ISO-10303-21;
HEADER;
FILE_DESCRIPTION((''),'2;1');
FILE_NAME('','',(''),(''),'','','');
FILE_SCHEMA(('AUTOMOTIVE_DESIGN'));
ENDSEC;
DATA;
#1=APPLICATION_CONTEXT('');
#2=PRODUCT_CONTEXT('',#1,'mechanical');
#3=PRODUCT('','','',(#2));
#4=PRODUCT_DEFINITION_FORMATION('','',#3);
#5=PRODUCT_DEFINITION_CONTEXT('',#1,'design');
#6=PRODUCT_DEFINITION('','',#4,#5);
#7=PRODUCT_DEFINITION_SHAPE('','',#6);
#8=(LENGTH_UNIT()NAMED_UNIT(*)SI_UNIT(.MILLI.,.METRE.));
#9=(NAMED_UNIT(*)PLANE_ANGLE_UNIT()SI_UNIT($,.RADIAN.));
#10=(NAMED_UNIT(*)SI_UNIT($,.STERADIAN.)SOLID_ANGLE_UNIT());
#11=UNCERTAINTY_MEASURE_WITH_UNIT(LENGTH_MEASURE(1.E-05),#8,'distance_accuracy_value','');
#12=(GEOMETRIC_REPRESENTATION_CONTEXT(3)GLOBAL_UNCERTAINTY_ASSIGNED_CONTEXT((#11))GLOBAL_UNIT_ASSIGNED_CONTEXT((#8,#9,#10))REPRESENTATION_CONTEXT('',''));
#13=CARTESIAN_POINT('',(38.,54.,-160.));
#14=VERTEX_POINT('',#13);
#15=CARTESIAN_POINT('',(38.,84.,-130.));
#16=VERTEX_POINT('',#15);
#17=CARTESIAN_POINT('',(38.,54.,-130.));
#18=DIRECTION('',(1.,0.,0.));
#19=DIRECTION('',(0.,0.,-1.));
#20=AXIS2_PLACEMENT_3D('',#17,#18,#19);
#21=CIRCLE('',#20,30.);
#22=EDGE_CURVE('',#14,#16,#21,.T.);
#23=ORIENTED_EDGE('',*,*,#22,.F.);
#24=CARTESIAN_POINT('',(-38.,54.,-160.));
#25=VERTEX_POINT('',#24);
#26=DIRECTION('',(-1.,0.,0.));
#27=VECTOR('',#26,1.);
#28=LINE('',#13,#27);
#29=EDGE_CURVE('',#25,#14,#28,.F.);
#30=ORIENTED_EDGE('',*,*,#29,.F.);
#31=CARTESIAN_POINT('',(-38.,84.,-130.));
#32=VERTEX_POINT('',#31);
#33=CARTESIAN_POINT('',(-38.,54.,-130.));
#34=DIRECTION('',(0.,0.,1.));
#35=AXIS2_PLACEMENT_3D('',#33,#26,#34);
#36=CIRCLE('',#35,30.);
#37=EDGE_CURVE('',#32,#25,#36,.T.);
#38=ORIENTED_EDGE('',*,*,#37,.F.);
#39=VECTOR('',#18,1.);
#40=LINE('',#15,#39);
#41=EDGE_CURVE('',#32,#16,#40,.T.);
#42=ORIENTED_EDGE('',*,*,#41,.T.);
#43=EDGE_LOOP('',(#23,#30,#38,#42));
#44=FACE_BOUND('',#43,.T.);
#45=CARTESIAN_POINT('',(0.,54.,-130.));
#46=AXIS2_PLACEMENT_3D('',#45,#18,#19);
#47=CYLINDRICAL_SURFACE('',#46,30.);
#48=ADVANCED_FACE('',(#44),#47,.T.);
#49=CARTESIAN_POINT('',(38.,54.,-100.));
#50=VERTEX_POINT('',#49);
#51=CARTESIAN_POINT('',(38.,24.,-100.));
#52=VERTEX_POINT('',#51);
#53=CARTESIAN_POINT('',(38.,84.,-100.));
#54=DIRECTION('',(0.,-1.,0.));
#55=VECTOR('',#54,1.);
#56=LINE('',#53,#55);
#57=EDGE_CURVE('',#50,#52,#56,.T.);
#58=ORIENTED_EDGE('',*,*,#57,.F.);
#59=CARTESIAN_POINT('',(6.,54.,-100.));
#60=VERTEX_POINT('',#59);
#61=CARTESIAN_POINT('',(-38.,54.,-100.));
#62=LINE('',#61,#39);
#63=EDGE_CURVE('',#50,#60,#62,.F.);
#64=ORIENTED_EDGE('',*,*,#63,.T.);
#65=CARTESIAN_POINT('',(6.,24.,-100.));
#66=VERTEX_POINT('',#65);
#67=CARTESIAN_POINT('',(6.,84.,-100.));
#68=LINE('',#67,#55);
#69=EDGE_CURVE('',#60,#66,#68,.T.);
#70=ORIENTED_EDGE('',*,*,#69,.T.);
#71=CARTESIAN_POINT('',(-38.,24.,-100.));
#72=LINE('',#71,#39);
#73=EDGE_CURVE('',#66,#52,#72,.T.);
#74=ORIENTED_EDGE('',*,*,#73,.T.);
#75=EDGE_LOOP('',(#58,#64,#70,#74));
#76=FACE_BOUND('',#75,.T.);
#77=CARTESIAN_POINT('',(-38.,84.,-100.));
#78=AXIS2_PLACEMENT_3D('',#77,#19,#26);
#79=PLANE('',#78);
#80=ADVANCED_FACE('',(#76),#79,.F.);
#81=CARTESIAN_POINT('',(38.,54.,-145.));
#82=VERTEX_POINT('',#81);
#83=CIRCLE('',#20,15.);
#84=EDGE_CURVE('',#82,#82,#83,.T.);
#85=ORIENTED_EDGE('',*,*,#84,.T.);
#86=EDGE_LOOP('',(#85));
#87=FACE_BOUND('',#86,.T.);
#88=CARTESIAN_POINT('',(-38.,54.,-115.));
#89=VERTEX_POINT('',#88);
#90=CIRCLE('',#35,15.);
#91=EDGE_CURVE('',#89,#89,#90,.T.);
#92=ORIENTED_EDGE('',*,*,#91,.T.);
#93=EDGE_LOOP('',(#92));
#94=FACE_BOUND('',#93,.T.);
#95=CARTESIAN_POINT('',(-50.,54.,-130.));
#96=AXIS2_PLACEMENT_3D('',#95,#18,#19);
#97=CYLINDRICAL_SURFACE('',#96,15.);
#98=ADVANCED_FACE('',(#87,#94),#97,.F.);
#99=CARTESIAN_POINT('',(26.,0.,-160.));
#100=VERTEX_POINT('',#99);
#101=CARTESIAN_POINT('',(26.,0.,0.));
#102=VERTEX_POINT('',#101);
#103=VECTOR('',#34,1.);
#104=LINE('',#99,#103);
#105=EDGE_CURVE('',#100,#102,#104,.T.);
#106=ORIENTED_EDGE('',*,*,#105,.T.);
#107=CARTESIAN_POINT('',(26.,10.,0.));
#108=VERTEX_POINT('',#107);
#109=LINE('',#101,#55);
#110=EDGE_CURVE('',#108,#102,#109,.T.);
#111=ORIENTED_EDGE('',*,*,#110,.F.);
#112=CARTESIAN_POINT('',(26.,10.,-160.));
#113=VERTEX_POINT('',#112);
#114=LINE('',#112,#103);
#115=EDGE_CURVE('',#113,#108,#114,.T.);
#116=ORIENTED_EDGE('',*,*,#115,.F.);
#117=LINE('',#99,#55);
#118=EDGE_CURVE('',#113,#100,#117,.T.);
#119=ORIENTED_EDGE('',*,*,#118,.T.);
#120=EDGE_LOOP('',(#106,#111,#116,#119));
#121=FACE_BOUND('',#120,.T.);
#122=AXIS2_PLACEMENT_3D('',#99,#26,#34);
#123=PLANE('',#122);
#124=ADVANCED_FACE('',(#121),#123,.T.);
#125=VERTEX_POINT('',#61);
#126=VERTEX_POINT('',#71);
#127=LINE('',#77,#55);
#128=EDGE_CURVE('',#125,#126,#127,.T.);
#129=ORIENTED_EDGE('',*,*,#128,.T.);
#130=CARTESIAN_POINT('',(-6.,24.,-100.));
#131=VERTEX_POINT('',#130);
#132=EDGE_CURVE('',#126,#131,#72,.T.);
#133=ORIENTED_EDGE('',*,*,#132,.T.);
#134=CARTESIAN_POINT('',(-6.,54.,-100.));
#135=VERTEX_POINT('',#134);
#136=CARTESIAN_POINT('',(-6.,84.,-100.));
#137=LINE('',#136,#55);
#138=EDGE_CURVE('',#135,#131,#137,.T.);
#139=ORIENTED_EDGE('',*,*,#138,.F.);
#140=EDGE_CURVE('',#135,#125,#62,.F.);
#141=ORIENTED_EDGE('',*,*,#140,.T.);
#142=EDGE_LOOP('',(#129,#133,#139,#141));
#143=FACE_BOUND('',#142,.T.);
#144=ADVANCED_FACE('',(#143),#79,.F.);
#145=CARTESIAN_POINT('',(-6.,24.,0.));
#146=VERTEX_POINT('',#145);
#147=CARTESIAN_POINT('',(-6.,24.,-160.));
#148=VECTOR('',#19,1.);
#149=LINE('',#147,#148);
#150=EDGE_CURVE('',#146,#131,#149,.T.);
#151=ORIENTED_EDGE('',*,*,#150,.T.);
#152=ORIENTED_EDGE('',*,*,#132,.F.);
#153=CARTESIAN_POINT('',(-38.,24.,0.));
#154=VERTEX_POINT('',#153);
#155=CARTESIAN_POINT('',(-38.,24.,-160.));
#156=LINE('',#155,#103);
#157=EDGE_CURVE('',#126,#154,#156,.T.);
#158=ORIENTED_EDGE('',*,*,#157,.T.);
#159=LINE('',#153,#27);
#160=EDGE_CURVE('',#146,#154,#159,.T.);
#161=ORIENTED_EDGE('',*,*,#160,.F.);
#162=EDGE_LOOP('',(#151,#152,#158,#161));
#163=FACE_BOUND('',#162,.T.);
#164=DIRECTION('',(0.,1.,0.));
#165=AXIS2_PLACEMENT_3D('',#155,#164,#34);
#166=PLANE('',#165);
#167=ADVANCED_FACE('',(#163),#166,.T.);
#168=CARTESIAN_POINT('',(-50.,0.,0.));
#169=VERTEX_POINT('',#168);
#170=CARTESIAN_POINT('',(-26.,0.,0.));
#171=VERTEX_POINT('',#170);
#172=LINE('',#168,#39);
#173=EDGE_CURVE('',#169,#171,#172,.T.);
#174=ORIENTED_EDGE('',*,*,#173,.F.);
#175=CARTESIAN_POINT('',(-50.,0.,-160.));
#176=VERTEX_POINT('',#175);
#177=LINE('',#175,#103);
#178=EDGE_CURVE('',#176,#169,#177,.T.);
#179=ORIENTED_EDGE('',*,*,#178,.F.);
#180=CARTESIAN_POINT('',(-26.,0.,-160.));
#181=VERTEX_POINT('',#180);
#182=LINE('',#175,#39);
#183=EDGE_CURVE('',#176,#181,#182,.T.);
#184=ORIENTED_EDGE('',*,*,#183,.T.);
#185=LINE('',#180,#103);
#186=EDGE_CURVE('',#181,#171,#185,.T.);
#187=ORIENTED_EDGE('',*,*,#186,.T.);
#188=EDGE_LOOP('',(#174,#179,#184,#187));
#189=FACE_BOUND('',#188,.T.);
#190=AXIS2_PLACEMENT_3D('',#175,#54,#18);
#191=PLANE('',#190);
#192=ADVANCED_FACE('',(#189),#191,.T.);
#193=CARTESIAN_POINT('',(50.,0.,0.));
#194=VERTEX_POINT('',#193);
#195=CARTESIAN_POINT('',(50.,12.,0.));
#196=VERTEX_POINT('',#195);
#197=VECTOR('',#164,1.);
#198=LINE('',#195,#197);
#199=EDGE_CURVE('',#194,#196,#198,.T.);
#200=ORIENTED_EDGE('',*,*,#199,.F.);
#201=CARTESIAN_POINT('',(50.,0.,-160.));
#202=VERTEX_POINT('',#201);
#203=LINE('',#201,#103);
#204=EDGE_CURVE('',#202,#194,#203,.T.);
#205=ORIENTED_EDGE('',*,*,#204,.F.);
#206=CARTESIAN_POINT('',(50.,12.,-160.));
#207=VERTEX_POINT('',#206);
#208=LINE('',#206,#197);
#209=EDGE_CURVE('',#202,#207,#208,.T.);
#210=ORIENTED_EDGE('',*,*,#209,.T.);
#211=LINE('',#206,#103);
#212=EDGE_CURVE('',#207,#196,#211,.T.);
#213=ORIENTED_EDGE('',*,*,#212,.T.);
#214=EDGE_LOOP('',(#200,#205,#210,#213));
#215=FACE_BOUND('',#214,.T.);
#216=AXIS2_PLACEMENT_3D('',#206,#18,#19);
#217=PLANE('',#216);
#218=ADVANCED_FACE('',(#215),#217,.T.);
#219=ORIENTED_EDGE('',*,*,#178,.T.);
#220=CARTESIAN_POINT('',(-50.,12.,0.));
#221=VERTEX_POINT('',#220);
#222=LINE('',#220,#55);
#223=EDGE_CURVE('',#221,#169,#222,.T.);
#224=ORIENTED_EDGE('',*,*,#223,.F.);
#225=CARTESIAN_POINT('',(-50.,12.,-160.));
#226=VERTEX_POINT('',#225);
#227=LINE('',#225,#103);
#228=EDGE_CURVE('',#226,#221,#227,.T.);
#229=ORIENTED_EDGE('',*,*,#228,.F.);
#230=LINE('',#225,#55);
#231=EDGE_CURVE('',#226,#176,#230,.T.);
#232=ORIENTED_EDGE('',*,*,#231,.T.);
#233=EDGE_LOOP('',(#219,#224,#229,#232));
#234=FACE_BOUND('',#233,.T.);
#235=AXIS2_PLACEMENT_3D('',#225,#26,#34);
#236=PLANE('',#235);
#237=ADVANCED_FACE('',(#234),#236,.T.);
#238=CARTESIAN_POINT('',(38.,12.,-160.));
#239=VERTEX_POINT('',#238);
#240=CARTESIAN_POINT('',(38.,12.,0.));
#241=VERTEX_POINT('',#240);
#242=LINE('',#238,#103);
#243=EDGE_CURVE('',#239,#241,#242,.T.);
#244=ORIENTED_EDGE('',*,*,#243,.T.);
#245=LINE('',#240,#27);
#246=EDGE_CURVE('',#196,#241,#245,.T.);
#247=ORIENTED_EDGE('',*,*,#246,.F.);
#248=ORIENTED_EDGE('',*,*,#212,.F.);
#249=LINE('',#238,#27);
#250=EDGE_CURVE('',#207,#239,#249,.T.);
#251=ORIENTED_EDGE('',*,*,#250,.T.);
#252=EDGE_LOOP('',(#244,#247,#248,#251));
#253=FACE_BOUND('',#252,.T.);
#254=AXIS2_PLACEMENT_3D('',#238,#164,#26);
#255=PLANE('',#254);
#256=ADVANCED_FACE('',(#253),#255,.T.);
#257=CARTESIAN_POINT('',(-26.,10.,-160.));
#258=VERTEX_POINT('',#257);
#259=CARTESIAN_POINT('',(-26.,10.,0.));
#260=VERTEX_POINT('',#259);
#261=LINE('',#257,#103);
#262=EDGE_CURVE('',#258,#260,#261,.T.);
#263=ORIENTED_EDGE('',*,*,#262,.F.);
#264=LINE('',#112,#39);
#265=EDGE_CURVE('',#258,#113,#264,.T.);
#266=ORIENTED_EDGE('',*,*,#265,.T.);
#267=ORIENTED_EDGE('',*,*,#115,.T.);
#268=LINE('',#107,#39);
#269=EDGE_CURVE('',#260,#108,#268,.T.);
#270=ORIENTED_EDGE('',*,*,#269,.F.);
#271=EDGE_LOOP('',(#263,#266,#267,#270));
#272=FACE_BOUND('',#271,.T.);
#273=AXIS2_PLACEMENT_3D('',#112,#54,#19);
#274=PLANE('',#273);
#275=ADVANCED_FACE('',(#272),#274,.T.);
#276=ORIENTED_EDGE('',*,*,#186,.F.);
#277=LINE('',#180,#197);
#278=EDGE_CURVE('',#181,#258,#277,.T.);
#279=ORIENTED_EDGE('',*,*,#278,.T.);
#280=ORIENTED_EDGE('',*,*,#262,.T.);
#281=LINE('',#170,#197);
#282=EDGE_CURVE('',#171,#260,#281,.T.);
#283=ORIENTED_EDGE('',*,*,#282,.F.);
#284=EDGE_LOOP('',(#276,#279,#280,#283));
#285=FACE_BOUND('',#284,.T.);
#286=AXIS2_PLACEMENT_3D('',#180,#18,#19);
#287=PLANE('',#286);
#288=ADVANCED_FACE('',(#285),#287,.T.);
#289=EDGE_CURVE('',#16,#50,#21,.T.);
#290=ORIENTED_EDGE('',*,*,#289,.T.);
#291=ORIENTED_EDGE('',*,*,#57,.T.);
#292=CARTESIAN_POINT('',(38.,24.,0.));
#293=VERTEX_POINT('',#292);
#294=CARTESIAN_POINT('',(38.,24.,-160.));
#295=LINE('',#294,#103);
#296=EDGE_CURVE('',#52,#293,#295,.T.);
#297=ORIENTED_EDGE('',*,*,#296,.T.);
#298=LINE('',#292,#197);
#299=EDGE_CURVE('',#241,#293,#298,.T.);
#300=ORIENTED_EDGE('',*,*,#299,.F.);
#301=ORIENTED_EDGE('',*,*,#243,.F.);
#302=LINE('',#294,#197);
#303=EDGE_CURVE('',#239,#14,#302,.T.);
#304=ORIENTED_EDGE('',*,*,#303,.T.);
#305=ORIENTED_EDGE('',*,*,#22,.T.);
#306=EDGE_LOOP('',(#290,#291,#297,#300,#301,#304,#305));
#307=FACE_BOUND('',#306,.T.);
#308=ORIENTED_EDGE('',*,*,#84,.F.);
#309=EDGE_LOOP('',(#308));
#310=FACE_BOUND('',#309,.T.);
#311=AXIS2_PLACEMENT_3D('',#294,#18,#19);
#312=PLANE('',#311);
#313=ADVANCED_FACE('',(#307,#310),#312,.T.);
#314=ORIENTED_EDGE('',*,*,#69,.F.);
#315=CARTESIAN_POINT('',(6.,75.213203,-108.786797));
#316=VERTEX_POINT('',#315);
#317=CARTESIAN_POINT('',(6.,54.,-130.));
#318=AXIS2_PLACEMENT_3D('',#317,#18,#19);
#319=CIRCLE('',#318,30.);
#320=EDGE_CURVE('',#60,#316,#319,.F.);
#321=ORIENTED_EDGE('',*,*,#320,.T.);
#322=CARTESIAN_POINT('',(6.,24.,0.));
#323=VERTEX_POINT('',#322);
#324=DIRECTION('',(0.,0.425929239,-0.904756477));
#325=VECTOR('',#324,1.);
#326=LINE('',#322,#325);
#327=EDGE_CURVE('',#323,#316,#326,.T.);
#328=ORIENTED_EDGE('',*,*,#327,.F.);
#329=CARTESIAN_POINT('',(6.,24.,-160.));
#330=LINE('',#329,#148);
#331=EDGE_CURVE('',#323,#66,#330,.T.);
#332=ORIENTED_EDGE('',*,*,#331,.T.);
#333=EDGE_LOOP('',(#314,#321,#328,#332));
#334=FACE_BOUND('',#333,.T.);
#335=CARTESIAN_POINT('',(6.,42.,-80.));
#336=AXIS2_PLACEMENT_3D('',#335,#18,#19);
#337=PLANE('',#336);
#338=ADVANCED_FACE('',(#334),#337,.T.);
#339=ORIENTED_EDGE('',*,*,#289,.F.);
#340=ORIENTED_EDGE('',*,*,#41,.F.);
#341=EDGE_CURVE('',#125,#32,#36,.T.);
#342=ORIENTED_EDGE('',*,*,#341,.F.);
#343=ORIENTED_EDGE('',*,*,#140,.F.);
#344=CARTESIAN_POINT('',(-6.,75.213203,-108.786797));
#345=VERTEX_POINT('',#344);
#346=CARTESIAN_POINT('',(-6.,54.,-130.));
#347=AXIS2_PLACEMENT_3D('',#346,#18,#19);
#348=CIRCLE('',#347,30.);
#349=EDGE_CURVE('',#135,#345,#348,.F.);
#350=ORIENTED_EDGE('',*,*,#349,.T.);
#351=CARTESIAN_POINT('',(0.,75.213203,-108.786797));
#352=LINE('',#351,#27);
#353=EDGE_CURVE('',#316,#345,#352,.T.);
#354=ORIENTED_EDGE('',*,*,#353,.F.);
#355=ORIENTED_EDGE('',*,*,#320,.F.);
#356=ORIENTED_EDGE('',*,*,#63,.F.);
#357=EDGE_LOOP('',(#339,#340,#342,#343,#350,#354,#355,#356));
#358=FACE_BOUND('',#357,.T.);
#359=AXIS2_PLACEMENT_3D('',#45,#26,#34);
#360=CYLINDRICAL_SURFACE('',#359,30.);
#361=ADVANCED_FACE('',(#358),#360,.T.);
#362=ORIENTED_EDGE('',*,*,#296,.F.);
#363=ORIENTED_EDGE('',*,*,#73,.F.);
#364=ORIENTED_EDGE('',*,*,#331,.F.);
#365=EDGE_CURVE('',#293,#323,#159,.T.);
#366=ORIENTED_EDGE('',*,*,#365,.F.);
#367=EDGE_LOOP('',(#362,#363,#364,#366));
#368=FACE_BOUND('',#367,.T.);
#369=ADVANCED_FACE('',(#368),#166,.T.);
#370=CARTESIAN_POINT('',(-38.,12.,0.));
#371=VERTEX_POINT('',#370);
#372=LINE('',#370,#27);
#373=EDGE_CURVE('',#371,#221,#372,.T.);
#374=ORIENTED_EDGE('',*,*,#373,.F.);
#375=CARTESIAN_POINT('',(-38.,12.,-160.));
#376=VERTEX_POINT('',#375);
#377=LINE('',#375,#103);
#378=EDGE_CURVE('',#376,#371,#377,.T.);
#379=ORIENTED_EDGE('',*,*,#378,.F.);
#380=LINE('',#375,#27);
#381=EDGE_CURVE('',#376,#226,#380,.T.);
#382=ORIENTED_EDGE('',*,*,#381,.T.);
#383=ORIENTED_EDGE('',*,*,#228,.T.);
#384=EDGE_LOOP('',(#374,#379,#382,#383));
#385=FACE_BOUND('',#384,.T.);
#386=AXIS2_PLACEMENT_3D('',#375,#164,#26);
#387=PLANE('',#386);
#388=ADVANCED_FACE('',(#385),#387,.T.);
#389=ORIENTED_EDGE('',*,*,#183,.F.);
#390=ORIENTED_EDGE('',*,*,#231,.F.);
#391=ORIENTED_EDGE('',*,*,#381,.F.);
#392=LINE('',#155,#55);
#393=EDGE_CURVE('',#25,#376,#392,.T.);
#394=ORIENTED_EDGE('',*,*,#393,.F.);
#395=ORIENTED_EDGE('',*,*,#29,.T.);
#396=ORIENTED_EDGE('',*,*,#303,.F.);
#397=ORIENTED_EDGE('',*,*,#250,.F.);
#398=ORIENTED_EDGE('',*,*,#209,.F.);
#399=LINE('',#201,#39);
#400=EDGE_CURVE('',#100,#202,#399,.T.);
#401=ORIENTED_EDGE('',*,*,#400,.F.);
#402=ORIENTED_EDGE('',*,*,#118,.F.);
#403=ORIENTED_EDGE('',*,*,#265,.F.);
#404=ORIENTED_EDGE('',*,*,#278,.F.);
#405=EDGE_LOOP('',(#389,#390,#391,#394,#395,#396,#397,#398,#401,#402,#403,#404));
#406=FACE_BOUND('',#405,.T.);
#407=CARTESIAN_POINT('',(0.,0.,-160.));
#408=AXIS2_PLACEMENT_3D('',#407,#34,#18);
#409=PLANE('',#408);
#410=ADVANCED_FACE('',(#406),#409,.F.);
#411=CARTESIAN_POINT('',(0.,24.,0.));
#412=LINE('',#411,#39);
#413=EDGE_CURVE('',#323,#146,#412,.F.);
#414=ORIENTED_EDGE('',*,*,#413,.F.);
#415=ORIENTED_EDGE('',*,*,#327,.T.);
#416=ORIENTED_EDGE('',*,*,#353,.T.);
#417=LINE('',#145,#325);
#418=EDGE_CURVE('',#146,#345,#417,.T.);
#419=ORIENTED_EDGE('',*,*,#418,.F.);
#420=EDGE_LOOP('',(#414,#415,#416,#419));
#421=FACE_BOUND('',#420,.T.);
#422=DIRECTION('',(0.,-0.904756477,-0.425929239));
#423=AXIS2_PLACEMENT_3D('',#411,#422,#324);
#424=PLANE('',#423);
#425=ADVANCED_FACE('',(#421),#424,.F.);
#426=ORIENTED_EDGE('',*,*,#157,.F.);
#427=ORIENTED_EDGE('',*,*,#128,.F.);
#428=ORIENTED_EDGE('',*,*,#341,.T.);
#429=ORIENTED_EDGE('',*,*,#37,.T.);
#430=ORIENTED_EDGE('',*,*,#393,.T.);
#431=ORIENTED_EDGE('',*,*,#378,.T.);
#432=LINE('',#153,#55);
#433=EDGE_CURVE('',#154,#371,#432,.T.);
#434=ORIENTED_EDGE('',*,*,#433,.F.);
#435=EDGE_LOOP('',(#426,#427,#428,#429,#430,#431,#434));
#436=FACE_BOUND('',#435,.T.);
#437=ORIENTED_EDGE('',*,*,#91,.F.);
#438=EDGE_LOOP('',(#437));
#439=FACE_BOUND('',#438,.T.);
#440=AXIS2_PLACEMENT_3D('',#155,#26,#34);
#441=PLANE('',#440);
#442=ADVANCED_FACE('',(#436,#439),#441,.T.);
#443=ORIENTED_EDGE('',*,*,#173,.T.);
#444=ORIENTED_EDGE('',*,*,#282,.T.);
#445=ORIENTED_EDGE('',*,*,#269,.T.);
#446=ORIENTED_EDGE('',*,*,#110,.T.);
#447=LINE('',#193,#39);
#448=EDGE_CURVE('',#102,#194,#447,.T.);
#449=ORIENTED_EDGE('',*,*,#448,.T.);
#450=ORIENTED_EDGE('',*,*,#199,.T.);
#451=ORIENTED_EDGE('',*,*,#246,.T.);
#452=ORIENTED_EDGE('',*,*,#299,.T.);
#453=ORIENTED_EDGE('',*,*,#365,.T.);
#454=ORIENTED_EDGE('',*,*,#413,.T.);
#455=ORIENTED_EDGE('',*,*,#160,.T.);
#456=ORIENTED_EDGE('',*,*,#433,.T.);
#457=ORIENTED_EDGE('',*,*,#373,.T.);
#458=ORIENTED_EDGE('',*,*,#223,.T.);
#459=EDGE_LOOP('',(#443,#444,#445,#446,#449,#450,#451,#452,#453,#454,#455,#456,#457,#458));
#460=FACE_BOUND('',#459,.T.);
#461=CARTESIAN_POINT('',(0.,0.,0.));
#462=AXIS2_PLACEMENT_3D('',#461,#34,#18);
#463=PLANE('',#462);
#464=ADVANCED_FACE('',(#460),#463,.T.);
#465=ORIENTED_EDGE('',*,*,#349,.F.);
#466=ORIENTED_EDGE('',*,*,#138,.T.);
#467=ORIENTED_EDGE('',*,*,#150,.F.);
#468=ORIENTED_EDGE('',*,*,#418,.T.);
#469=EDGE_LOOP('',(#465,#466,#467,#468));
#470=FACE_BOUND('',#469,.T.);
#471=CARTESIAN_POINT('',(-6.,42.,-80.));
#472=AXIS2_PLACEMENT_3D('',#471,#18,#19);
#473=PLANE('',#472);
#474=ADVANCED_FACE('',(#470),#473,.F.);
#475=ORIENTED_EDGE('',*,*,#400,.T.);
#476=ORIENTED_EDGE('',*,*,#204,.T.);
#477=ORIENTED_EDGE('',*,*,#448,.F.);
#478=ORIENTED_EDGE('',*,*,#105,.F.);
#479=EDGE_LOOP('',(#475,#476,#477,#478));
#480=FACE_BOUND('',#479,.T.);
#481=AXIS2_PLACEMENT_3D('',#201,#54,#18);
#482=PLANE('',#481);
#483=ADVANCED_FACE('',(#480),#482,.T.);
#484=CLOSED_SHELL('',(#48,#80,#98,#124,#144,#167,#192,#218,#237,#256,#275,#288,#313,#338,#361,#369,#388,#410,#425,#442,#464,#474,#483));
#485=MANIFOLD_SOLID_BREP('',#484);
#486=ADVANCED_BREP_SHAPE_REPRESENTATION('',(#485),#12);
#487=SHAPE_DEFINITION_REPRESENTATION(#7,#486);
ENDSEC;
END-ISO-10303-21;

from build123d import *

# Parameters (mm, degrees)
BOSS_EXTRUDE1_DEPTH = 160
SKETCH2_W           = 76
SKETCH2_H           = 60
BOSS_EXTRUDE2_DEPTH = 60
FILLET1_R           = 30
SKETCH3_R           = 15
CUT_EXTRUDE1_DEPTH  = 201.997512422
RIB1_REACH          = 189.499
SKETCH7_WALL_W      = 497.237426276
SKETCH7_WALL_H      = 12


with BuildPart() as part:
    # Sketch1 → Boss-Extrude1 (new body)
    with BuildSketch(Plane.XY):
        Polygon((-38, 24), (38, 24), (38, 12), (50, 12), (50, 0), (26, 0), (26, 10), (-26, 10), (-26, 0), (-50, 0), (-50, 12), (-38, 12), align=None)
    extrude(amount=-BOSS_EXTRUDE1_DEPTH)

    # Sketch2 → Boss-Extrude2 (add)
    with BuildSketch(Plane(origin=(0, 24, 0), x_dir=(1, 0, 0), z_dir=(0, 1, 0))):
        with Locations((0, 130)):
            Rectangle(SKETCH2_W, SKETCH2_H)
    extrude(amount=BOSS_EXTRUDE2_DEPTH)

    # Fillet1
    fillet1_edges = [part.edges().sort_by_distance(p)[0] for p in [
        (0, 84, -160),
        (0, 84, -100),
    ]]
    fillet(fillet1_edges, radius=FILLET1_R - 0.0001)  # a hair under: the kernel refuses the full size

    # Sketch3 → Cut-Extrude1 (cut, through all)
    with BuildSketch(Plane(origin=(38, 0, 0), x_dir=(0, 0, -1), z_dir=(1, 0, 0))):
        with Locations((130, 54)):
            Circle(SKETCH3_R)
    extrude(amount=-CUT_EXTRUDE1_DEPTH, mode=Mode.SUBTRACT)

    # Sketch7 wall → Rib1 (add, up to next)
    with BuildSketch(Plane(origin=(0, 49.606601718, -54.393398282), x_dir=(0, 0.42592923947, -0.904756477161), z_dir=(0, 0.904756477161, 0.42592923947)), mode=Mode.PRIVATE) as rib1_sk1:
        Rectangle(SKETCH7_WALL_W, SKETCH7_WALL_H)
    rib1_tool1 = extrude(rib1_sk1.sketch, amount=-RIB1_REACH, mode=Mode.PRIVATE) - part.part
    add(rib1_tool1.solids().sort_by_distance((0, 49.606601718, -54.393398282))[0])


solid = part.part
